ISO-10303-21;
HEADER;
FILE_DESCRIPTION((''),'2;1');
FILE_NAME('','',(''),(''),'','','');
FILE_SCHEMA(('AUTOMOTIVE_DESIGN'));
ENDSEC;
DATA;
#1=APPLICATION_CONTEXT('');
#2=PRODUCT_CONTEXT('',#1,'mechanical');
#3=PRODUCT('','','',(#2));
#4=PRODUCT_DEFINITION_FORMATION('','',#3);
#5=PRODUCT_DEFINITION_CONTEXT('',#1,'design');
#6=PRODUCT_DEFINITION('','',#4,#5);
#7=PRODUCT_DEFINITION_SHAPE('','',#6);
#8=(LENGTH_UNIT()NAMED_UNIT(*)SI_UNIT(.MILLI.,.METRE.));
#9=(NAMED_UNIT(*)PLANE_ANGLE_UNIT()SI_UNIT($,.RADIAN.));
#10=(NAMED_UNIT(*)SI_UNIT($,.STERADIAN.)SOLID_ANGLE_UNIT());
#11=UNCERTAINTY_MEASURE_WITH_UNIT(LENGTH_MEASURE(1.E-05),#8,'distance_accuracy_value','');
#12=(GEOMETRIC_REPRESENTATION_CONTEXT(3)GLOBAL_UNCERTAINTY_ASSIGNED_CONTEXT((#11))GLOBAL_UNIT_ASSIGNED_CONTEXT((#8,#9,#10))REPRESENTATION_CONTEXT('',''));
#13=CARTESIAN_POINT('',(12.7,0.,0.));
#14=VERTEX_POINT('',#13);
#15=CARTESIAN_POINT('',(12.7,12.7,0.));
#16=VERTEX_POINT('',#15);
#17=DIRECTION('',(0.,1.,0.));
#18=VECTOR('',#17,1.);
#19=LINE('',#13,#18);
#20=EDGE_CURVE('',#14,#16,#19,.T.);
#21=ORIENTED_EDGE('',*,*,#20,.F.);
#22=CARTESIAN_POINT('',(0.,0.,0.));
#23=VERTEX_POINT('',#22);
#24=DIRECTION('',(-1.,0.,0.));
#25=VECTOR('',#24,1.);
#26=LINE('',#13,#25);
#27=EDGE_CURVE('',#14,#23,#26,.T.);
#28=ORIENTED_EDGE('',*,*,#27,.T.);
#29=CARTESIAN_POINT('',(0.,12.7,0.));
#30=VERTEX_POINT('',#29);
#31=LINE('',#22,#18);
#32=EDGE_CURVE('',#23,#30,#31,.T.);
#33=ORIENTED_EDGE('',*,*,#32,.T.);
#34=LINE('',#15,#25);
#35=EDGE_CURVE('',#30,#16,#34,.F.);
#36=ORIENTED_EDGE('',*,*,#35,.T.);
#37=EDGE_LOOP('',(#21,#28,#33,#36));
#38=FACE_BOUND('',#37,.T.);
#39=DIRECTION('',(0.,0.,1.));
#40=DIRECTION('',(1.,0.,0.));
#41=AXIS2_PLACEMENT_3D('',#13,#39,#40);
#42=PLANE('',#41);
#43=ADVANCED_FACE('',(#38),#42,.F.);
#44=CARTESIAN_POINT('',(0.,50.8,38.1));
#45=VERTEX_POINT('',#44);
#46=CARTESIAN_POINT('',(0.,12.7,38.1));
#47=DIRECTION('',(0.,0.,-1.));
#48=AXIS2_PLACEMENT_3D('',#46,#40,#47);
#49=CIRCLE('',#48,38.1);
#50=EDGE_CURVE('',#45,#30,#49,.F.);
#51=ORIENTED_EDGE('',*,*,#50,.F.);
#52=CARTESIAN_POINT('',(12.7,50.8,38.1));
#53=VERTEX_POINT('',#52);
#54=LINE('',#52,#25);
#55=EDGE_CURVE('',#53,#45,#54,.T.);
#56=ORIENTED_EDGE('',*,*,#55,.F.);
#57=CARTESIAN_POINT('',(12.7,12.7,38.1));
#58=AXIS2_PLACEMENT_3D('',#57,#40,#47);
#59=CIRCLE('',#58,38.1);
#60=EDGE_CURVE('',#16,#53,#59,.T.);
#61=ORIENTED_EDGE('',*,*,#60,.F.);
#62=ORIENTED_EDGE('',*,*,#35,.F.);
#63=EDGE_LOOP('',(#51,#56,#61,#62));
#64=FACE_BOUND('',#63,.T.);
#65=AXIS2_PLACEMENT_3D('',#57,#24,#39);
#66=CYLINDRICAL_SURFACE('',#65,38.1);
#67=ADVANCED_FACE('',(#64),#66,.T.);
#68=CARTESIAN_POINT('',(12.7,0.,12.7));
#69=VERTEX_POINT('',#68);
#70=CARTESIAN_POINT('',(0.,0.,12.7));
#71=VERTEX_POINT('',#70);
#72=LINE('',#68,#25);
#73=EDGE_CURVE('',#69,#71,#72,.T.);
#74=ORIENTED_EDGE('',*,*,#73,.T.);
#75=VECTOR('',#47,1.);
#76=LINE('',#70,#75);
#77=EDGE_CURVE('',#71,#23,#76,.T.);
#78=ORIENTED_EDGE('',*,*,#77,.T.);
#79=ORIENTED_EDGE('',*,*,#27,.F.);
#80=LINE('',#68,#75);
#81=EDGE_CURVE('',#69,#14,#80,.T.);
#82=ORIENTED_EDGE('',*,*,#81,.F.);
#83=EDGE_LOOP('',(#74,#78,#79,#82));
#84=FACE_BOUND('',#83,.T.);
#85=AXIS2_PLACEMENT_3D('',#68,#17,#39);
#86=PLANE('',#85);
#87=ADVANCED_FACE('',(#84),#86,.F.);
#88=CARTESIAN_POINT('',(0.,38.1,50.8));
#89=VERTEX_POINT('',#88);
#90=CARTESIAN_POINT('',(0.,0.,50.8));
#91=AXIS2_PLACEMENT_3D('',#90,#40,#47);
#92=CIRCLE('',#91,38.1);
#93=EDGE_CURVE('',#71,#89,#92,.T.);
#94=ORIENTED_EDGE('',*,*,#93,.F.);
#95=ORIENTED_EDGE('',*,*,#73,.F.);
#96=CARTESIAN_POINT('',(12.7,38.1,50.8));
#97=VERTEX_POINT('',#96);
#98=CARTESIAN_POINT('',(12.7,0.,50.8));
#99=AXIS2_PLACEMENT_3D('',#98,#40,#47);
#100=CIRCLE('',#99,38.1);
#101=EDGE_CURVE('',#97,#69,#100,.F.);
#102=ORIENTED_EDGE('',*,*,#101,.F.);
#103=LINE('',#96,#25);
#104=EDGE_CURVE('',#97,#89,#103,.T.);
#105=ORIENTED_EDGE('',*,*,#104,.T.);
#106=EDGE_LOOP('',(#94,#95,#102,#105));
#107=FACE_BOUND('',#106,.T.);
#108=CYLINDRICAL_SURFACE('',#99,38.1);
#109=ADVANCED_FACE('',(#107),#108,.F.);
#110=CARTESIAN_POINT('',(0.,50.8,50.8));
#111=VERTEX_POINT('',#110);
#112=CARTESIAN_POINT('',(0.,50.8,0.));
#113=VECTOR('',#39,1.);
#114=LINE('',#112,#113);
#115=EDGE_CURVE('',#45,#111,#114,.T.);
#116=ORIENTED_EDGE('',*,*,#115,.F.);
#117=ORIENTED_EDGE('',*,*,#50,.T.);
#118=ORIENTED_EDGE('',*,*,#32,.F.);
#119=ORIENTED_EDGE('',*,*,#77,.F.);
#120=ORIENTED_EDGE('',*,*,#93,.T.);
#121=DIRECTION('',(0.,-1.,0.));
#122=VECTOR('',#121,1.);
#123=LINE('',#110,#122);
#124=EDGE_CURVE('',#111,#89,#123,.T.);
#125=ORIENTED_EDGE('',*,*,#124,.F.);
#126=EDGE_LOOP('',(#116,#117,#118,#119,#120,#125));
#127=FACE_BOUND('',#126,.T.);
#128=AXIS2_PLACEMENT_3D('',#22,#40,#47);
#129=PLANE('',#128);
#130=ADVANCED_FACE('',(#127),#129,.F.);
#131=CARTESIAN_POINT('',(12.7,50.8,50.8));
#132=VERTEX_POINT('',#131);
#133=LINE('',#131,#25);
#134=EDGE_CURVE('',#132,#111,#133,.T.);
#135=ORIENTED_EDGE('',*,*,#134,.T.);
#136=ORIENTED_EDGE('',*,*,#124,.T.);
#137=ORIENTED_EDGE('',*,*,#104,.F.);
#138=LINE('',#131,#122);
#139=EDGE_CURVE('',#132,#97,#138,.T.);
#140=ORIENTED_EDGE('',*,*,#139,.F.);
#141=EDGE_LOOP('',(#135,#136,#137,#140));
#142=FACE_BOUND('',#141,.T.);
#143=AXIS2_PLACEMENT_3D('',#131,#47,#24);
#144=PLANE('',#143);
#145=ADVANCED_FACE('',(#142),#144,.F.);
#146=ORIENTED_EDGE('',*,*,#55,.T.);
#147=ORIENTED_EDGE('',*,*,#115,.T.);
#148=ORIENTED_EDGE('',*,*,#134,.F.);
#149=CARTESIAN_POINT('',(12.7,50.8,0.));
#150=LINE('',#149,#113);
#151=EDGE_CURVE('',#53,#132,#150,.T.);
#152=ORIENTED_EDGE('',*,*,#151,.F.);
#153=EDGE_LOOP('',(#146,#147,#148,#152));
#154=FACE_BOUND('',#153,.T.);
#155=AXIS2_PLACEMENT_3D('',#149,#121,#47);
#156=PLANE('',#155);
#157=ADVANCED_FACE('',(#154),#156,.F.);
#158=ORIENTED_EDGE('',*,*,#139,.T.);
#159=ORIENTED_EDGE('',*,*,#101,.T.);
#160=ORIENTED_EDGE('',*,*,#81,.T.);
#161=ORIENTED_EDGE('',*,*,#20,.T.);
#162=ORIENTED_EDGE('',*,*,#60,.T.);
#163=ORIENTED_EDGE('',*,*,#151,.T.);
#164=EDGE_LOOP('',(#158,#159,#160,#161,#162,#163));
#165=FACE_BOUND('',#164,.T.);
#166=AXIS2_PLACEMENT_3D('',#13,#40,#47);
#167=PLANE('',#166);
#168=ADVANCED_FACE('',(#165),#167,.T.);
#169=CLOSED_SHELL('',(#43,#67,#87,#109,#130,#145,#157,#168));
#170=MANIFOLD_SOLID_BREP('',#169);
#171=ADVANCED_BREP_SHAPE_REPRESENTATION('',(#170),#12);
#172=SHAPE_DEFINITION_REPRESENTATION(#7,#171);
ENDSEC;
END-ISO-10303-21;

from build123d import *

# Parameters (mm, degrees)
BOSS_EXTRUDE1_DEPTH = 12.7
FILLET1_R           = 38.1
FILLET2_R           = 38.1


with BuildPart() as part:
    # Sketch1 → Boss-Extrude1 (new body)
    with BuildSketch(Plane(origin=(0, 0, 0), x_dir=(0, 0, -1), z_dir=(1, 0, 0))):
        Polygon((0, 0), (0, 50.8), (-50.8, 50.8), (-50.8, 38.1), (-12.7, 38.1), (-12.7, 0), align=None)
    extrude(amount=BOSS_EXTRUDE1_DEPTH)

    # Fillet1
    fillet1_edges = [part.edges().sort_by_distance(p)[0] for p in [
        (6.35, 38.1, 12.7),
    ]]
    fillet(fillet1_edges, radius=FILLET1_R - 0.0001)  # a hair under: the kernel refuses the full size

    # Fillet2
    fillet2_edges = [part.edges().sort_by_distance(p)[0] for p in [
        (6.35, 50.8, 0),
    ]]
    fillet(fillet2_edges, radius=FILLET2_R)


solid = part.part
